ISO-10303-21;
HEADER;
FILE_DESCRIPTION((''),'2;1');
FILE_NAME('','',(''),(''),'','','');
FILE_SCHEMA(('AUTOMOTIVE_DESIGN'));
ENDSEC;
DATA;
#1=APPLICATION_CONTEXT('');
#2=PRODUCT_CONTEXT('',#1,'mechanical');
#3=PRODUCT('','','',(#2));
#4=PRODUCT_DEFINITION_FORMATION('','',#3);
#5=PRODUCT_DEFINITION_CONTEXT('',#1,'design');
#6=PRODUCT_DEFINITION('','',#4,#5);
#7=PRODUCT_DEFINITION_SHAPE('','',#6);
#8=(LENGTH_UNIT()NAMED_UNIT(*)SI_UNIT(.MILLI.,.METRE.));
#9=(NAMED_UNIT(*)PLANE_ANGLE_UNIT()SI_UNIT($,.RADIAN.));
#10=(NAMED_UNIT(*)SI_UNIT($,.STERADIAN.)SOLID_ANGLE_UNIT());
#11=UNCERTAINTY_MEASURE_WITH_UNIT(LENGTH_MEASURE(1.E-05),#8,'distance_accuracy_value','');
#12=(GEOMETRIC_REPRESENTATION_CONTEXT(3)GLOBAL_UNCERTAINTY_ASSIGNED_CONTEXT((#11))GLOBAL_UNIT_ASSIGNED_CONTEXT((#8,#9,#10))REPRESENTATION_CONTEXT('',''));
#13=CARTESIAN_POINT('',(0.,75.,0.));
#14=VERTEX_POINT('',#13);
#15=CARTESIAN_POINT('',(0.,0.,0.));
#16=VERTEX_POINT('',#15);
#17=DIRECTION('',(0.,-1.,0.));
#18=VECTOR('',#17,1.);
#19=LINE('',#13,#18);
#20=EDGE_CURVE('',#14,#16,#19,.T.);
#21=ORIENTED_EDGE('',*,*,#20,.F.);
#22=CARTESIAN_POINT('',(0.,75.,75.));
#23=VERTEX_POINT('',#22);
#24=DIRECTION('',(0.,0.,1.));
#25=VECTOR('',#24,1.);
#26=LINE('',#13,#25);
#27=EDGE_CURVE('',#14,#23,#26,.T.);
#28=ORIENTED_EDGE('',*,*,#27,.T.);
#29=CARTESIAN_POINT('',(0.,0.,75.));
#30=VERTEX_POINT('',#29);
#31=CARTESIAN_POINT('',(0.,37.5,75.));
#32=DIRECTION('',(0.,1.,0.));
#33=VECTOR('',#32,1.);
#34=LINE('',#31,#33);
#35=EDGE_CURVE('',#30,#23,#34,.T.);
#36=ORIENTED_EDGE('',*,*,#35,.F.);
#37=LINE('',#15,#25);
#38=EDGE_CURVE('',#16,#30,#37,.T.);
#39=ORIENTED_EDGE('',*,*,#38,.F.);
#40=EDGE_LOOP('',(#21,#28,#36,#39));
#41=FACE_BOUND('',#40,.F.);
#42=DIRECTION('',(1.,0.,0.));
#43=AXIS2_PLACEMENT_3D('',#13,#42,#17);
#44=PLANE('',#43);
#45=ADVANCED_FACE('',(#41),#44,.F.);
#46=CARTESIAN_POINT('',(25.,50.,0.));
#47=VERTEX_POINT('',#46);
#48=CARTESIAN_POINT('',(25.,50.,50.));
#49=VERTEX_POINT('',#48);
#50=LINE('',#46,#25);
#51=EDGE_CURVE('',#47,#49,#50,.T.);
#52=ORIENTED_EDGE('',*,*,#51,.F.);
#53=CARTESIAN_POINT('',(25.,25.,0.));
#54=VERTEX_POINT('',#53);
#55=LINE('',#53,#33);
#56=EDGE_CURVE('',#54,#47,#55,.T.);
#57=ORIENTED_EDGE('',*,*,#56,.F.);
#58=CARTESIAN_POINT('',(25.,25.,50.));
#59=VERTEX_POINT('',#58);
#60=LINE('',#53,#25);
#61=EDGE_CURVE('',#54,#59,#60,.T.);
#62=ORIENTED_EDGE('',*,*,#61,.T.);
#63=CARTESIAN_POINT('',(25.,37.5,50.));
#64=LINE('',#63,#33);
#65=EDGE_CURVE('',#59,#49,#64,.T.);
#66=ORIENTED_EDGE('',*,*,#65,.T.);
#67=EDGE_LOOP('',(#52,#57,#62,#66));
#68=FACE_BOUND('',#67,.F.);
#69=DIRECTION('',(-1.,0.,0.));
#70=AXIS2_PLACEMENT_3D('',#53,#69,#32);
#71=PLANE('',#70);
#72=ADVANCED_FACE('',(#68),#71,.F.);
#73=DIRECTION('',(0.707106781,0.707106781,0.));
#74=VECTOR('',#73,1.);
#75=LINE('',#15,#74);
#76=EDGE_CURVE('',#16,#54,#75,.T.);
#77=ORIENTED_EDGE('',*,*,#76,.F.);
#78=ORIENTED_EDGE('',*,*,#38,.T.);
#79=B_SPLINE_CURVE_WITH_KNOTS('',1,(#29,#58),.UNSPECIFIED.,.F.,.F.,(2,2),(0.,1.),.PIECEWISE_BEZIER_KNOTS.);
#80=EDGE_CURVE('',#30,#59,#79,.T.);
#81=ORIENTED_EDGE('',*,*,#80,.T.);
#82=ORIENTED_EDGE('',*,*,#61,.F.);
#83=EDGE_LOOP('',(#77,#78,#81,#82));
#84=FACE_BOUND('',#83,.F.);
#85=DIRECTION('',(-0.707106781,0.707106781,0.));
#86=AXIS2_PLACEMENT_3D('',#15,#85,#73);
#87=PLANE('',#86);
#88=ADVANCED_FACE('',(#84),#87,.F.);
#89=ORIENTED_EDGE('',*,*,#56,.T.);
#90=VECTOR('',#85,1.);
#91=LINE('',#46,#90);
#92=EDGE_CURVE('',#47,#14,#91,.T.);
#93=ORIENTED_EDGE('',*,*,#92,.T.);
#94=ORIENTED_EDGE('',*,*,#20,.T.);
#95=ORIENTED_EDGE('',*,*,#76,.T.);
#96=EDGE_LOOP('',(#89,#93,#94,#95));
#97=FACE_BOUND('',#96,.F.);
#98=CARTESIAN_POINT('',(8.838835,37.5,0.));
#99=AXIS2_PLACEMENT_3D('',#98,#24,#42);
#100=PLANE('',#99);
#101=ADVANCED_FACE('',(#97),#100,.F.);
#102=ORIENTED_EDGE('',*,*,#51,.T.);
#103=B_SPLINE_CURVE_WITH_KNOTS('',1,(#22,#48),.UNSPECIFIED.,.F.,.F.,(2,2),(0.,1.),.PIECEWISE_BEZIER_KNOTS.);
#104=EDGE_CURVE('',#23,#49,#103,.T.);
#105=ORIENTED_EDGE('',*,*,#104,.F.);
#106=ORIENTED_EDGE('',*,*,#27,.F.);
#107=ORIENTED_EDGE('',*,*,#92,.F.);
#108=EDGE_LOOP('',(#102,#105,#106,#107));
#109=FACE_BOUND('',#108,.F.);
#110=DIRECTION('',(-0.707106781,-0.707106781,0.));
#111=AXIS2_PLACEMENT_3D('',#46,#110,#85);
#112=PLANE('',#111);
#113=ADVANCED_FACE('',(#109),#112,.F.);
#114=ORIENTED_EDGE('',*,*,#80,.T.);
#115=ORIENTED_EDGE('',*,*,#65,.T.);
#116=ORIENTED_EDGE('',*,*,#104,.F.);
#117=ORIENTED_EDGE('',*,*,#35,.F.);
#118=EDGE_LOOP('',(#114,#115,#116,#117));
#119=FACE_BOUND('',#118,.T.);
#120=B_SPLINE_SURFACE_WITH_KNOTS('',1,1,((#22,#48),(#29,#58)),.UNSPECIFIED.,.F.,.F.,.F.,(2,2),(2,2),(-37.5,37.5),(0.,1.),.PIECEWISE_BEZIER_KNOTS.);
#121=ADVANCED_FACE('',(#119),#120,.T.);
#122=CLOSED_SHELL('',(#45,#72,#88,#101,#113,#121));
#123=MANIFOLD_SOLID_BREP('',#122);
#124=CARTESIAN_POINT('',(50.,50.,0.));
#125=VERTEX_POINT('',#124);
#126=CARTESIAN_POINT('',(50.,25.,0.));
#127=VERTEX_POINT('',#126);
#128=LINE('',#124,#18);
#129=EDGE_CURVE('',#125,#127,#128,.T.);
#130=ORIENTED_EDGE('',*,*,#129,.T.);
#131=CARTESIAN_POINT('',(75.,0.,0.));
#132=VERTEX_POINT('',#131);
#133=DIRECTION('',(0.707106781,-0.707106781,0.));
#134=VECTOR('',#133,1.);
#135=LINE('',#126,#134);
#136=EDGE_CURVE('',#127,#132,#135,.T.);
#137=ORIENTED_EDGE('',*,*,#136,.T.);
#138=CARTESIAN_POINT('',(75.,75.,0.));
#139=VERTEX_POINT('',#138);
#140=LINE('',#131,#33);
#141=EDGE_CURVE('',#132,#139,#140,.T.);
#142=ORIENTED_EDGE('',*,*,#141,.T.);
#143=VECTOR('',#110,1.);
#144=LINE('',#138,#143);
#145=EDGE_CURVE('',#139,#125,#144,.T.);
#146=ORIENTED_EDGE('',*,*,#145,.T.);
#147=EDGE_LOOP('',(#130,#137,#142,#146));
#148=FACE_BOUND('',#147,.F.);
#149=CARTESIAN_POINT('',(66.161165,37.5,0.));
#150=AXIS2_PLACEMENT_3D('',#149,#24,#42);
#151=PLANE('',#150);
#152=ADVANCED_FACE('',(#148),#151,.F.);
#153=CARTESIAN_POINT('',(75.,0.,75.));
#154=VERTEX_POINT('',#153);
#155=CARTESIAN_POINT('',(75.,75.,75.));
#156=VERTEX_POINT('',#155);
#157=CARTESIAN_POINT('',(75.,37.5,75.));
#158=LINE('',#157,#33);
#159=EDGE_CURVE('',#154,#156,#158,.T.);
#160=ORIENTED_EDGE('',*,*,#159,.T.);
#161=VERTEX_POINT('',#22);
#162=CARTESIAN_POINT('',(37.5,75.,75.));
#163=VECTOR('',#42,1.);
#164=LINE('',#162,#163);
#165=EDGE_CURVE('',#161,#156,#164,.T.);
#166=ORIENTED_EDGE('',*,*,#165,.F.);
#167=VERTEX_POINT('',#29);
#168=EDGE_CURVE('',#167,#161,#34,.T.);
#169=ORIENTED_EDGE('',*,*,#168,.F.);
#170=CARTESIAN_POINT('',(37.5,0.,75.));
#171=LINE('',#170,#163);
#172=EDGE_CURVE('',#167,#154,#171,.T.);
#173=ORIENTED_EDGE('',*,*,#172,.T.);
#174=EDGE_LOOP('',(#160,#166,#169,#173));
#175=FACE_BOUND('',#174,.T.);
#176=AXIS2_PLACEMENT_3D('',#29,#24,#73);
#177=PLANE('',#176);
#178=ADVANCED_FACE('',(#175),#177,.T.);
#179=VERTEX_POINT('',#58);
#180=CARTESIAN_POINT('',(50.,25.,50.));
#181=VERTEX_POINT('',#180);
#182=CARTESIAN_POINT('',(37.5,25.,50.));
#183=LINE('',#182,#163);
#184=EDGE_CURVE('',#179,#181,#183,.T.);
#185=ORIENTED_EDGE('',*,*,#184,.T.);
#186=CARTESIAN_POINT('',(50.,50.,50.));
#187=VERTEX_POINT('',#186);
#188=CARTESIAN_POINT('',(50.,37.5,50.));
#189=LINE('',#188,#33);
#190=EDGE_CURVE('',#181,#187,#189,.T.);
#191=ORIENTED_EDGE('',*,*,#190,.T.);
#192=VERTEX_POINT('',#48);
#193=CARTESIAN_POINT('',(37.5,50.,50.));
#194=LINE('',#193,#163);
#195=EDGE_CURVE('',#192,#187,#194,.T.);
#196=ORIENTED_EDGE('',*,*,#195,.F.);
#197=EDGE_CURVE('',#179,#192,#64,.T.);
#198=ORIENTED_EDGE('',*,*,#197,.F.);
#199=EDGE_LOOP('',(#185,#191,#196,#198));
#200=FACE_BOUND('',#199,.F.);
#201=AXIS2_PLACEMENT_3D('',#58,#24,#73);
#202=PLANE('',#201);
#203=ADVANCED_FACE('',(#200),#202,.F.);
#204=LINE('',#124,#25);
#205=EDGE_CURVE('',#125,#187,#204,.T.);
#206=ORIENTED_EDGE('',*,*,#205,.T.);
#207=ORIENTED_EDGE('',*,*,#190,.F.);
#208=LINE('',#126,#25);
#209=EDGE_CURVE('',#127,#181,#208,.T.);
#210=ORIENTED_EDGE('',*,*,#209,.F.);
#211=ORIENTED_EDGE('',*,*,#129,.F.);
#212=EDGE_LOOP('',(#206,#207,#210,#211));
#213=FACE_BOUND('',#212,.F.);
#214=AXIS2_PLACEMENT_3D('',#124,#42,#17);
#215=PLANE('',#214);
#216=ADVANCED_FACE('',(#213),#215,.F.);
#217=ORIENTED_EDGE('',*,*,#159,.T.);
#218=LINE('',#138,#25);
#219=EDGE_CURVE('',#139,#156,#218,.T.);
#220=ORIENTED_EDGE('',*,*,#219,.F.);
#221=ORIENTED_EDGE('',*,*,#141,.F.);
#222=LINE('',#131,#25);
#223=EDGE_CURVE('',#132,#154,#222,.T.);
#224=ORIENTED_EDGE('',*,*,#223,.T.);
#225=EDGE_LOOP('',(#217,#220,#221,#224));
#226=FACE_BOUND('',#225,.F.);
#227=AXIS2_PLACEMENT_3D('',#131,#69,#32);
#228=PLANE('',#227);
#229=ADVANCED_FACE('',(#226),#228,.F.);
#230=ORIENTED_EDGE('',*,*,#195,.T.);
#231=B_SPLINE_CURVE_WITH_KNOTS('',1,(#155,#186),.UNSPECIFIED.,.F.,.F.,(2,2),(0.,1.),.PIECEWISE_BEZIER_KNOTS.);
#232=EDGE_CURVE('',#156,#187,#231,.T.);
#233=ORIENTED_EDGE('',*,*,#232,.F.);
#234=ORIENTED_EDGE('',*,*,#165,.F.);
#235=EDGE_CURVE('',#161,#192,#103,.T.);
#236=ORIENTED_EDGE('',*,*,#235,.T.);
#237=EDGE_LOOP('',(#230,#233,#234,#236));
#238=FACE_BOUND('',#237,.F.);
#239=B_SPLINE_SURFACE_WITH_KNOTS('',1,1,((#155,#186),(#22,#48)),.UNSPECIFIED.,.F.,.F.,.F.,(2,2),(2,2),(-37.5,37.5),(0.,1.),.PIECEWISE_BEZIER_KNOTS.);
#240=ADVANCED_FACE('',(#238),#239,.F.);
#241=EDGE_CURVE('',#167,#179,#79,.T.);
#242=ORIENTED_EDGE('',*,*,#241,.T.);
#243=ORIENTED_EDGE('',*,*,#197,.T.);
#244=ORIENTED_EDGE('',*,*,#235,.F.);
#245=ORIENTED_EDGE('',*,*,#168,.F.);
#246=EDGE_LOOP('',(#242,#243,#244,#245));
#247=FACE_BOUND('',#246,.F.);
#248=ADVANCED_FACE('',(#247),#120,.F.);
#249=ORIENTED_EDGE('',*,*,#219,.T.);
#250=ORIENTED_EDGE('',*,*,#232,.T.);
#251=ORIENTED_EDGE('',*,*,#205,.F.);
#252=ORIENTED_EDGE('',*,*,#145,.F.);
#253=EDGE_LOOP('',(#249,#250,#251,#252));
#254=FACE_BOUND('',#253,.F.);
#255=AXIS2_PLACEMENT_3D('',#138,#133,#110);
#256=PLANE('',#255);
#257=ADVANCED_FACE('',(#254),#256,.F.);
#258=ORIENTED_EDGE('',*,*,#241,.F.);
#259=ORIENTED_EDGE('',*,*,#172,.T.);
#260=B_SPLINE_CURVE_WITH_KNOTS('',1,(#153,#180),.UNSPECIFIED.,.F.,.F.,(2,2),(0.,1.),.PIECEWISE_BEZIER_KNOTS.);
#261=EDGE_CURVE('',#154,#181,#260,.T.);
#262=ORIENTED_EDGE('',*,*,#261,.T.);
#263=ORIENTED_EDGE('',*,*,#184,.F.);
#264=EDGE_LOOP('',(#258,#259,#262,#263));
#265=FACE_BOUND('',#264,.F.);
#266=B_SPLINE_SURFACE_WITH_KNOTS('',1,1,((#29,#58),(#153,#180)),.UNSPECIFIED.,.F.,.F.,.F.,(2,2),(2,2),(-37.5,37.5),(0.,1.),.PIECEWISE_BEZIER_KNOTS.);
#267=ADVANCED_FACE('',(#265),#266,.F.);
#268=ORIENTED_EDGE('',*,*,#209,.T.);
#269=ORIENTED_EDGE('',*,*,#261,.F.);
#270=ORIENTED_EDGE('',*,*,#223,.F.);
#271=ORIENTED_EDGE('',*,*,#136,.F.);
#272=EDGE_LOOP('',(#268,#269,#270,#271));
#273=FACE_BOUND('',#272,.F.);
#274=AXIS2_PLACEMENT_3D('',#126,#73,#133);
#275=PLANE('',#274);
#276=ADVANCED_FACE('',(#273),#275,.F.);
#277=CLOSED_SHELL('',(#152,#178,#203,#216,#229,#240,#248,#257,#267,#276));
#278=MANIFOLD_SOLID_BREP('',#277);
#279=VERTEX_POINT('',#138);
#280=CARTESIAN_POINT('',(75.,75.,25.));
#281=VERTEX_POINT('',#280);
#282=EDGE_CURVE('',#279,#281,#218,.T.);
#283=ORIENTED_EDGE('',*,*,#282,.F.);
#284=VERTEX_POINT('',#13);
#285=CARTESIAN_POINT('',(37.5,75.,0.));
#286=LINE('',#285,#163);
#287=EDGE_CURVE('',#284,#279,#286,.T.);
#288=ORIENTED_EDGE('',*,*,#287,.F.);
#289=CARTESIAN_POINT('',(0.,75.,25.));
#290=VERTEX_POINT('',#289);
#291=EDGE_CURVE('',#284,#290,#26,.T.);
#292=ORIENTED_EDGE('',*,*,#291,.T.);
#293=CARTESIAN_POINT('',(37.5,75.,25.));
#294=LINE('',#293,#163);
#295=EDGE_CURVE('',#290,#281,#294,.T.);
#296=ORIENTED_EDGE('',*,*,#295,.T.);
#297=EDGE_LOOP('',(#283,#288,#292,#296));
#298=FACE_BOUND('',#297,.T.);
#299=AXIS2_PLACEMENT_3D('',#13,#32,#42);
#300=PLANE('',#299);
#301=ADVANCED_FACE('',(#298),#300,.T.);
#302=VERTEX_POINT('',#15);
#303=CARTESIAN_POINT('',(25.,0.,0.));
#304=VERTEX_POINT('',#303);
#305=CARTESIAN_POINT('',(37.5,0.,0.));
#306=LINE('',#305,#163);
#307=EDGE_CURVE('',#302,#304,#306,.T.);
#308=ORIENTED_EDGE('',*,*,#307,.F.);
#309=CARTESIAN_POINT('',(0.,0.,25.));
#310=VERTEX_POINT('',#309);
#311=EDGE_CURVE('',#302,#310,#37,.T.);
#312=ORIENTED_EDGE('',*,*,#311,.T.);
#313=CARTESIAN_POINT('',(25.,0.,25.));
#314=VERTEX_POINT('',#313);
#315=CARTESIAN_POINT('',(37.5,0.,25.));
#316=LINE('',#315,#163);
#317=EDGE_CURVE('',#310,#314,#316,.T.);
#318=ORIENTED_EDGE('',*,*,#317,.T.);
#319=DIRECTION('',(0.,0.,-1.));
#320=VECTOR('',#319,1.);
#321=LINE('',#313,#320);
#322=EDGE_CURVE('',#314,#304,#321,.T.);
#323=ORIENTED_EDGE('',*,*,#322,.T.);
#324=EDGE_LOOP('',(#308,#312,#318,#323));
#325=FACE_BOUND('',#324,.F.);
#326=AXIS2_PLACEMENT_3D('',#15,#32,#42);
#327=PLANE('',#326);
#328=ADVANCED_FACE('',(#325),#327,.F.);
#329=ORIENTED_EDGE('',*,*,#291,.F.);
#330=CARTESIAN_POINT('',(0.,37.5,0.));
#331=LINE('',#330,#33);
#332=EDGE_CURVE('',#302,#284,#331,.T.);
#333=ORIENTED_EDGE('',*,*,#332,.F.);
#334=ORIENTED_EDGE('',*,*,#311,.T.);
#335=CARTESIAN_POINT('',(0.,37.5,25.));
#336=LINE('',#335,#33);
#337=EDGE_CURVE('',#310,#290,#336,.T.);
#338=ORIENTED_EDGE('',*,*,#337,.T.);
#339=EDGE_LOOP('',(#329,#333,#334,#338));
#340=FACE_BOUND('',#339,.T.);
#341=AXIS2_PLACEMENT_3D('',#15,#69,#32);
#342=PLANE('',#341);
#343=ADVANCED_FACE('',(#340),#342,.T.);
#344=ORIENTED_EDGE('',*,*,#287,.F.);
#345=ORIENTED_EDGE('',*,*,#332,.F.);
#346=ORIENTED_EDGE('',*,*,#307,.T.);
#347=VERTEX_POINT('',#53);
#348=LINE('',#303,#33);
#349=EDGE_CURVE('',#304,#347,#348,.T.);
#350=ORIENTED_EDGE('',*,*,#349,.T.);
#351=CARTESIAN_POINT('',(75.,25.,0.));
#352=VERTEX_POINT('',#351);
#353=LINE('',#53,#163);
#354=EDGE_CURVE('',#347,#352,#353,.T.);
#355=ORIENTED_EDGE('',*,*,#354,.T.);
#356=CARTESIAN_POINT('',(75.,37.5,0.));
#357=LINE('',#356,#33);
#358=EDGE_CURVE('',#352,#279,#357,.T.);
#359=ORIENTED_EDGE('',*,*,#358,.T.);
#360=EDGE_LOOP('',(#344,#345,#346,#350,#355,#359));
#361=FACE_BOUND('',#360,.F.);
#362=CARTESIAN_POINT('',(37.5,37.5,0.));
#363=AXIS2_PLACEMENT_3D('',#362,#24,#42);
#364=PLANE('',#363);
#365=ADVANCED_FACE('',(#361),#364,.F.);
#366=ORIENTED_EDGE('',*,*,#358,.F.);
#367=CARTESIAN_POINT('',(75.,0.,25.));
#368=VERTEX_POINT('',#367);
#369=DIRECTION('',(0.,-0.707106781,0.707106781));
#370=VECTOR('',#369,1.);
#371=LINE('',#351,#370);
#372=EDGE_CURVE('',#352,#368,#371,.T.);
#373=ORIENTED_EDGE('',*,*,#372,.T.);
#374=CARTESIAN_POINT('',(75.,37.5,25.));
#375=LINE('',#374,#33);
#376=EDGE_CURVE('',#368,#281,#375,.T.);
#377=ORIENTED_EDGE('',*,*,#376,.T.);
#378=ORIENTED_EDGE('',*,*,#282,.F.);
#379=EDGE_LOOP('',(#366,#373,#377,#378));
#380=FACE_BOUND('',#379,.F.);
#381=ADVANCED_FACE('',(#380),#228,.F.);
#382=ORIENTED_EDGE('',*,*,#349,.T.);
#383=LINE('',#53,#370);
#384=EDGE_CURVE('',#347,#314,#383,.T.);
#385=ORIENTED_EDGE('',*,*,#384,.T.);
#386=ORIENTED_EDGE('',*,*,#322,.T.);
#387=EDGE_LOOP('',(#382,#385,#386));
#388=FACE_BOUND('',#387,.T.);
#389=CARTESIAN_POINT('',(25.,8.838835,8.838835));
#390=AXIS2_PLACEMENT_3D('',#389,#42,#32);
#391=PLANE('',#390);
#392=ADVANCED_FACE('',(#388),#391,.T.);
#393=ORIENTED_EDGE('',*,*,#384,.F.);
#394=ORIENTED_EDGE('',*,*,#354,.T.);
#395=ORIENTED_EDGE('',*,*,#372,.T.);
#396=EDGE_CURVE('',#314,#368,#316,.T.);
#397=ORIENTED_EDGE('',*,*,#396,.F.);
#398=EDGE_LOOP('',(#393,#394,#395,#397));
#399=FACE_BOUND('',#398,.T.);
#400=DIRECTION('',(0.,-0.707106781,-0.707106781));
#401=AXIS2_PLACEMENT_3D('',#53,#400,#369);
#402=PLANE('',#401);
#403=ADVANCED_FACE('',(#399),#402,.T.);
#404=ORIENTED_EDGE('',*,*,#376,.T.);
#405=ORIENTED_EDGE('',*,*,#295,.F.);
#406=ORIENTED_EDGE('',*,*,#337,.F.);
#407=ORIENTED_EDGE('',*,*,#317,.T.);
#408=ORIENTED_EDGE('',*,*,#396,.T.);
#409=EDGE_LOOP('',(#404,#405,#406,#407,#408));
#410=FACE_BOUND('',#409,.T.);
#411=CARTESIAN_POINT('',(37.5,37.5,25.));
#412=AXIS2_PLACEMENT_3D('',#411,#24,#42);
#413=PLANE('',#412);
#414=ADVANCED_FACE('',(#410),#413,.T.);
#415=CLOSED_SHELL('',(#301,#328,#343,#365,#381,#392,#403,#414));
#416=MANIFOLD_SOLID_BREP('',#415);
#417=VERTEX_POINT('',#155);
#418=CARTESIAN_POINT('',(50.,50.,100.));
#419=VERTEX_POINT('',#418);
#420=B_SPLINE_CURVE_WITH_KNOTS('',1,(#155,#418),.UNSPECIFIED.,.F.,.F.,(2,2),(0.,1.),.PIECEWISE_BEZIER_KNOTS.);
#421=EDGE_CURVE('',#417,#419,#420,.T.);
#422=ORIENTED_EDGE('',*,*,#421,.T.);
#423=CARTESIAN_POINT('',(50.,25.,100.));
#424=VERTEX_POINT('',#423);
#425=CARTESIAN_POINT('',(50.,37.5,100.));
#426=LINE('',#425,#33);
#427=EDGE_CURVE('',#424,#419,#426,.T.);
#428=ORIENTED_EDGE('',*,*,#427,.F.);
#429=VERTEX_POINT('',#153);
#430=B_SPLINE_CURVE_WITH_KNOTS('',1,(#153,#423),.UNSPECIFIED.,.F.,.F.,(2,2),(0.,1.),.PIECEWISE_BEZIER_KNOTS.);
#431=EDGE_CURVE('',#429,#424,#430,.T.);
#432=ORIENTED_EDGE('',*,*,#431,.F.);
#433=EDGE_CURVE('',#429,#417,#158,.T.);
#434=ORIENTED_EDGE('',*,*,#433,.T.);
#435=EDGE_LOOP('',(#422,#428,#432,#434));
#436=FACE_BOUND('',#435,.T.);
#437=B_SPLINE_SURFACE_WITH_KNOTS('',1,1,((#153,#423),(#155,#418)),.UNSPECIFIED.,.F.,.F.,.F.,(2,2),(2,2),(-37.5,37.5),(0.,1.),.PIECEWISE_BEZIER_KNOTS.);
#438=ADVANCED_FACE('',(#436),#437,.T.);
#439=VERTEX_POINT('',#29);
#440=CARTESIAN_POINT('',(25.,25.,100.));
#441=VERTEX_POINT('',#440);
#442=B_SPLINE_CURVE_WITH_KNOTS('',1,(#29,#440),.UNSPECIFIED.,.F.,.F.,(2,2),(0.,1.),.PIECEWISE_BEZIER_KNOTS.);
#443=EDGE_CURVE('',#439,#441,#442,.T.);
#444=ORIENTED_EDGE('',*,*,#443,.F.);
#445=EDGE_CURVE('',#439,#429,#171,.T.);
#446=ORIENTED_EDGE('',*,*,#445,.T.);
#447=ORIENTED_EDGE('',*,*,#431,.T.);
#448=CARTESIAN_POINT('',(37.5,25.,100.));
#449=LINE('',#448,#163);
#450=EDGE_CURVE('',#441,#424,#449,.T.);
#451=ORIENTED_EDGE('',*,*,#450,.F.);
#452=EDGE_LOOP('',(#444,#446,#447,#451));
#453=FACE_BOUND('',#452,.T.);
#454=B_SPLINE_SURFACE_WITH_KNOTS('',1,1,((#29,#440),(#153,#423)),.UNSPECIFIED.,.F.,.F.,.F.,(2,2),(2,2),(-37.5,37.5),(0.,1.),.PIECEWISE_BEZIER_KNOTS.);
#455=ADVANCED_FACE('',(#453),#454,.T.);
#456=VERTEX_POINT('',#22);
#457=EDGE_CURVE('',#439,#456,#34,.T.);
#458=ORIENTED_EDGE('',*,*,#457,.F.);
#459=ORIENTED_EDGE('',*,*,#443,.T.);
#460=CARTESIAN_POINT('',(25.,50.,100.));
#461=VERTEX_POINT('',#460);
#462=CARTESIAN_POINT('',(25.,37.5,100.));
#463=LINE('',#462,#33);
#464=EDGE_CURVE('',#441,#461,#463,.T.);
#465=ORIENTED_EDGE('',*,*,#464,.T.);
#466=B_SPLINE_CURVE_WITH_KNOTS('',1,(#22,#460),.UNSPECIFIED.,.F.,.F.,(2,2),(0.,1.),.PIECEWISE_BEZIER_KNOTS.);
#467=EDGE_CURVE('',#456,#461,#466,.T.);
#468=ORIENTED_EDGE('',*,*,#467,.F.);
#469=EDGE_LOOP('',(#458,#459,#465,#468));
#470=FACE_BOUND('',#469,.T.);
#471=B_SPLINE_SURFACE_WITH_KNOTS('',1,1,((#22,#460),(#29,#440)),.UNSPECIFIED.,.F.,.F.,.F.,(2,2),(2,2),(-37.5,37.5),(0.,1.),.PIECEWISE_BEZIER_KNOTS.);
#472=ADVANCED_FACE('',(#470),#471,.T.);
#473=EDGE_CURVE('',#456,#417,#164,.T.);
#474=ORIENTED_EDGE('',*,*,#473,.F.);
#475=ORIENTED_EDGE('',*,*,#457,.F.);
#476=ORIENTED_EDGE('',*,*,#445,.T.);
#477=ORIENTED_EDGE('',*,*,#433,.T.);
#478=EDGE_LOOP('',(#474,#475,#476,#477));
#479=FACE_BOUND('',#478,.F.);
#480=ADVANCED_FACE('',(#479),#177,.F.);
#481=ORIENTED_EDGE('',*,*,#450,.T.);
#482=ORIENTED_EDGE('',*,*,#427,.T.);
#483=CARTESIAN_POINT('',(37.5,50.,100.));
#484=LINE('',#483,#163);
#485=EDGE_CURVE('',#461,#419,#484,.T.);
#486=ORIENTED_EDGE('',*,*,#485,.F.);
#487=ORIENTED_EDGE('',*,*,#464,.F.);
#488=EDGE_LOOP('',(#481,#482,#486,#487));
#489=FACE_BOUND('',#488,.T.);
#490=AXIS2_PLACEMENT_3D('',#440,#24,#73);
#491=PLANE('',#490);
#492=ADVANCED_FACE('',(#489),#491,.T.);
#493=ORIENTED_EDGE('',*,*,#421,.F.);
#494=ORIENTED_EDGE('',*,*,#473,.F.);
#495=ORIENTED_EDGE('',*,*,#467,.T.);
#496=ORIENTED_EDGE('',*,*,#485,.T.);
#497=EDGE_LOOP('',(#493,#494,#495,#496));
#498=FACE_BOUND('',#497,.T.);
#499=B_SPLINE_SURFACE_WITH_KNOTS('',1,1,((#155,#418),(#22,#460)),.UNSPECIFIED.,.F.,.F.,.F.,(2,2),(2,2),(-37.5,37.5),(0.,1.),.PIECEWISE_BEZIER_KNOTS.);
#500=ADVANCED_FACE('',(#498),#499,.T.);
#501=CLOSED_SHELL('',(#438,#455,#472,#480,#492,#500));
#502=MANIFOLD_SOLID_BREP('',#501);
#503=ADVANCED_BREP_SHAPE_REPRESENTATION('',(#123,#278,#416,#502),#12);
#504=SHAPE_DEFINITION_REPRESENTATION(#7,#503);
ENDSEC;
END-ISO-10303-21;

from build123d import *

# Parameters (mm, degrees)
F5_W      = 75
F5_H      = 75
F6_W      = 25
F6_H      = 25
F8_W      = 25
F8_H      = 25
F11_REACH = 179.0579416042
F13_REACH = 179.0579416042
F0_W      = 75
F0_H      = 75
F14_DEPTH = 25
F16_START = 25
F16_DEPTH = 50


with BuildPart() as f7:
    # F5 (on offset) → F7 section 0
    with BuildSketch(Plane.XY.offset(75)):
        with Locations((37.5, 37.5)):
            Rectangle(F5_W, F5_H)
    # F6 (on offset) → F7 section 1
    with BuildSketch(Plane.XY.offset(100)):
        with Locations((37.5, 37.5)):
            Rectangle(F6_W, F6_H)
    loft()


with BuildPart() as f9:
    # F5 (on offset) → F9 section 0
    with BuildSketch(Plane.XY.offset(75)):
        with Locations((37.5, 37.5)):
            Rectangle(F5_W, F5_H)
    # F8 (on offset) → F9 section 1
    with BuildSketch(Plane.XY.offset(50)):
        with Locations((37.5, 37.5)):
            Rectangle(F8_W, F8_H)
    loft()

    f11_end = f9.faces().sort_by_distance((64.5833333333, 37.5, 64.5833333333))[0]
    # F10 (on Top) → F11 (join, up to a face of the model that its end follows)
    with BuildSketch(Plane.XY):
        Polygon((50, 25), (75, 0), (75, 75), (50, 50), align=None)
    f11_long = extrude(amount=F11_REACH, mode=Mode.PRIVATE)
    add(split(f11_long, bisect_by=f11_end, keep=Keep.TOP, mode=Mode.PRIVATE))


with BuildPart() as f13:
    f13_end = f9.part.faces().sort_by_distance((10.4166666667, 37.5, 64.5833333333))[0]
    # F12 (on Top) → F13 (new body, up to a face of F9 that its end follows)
    with BuildSketch(Plane.XY):
        Polygon((25, 50), (0, 75), (0, 0), (25, 25), align=None)
    f13_long = extrude(amount=F13_REACH, mode=Mode.PRIVATE)
    add(split(f13_long, bisect_by=f13_end, keep=Keep.TOP, mode=Mode.PRIVATE))


with BuildPart() as f14:
    # F0 (on Top) → F14 (new body)
    with BuildSketch(Plane.XY):
        with Locations((37.5, 37.5)):
            Rectangle(F0_W, F0_H)
    extrude(amount=F14_DEPTH)

    # F15 (on Right) → F16 (cut)
    with BuildSketch(Plane.YZ.offset(F16_START)):
        Polygon((25, 0), (0, 25), (0, 0), align=None)
    extrude(amount=F16_DEPTH, mode=Mode.SUBTRACT)


solid = Compound([f7.part, f9.part, f13.part, f14.part])
